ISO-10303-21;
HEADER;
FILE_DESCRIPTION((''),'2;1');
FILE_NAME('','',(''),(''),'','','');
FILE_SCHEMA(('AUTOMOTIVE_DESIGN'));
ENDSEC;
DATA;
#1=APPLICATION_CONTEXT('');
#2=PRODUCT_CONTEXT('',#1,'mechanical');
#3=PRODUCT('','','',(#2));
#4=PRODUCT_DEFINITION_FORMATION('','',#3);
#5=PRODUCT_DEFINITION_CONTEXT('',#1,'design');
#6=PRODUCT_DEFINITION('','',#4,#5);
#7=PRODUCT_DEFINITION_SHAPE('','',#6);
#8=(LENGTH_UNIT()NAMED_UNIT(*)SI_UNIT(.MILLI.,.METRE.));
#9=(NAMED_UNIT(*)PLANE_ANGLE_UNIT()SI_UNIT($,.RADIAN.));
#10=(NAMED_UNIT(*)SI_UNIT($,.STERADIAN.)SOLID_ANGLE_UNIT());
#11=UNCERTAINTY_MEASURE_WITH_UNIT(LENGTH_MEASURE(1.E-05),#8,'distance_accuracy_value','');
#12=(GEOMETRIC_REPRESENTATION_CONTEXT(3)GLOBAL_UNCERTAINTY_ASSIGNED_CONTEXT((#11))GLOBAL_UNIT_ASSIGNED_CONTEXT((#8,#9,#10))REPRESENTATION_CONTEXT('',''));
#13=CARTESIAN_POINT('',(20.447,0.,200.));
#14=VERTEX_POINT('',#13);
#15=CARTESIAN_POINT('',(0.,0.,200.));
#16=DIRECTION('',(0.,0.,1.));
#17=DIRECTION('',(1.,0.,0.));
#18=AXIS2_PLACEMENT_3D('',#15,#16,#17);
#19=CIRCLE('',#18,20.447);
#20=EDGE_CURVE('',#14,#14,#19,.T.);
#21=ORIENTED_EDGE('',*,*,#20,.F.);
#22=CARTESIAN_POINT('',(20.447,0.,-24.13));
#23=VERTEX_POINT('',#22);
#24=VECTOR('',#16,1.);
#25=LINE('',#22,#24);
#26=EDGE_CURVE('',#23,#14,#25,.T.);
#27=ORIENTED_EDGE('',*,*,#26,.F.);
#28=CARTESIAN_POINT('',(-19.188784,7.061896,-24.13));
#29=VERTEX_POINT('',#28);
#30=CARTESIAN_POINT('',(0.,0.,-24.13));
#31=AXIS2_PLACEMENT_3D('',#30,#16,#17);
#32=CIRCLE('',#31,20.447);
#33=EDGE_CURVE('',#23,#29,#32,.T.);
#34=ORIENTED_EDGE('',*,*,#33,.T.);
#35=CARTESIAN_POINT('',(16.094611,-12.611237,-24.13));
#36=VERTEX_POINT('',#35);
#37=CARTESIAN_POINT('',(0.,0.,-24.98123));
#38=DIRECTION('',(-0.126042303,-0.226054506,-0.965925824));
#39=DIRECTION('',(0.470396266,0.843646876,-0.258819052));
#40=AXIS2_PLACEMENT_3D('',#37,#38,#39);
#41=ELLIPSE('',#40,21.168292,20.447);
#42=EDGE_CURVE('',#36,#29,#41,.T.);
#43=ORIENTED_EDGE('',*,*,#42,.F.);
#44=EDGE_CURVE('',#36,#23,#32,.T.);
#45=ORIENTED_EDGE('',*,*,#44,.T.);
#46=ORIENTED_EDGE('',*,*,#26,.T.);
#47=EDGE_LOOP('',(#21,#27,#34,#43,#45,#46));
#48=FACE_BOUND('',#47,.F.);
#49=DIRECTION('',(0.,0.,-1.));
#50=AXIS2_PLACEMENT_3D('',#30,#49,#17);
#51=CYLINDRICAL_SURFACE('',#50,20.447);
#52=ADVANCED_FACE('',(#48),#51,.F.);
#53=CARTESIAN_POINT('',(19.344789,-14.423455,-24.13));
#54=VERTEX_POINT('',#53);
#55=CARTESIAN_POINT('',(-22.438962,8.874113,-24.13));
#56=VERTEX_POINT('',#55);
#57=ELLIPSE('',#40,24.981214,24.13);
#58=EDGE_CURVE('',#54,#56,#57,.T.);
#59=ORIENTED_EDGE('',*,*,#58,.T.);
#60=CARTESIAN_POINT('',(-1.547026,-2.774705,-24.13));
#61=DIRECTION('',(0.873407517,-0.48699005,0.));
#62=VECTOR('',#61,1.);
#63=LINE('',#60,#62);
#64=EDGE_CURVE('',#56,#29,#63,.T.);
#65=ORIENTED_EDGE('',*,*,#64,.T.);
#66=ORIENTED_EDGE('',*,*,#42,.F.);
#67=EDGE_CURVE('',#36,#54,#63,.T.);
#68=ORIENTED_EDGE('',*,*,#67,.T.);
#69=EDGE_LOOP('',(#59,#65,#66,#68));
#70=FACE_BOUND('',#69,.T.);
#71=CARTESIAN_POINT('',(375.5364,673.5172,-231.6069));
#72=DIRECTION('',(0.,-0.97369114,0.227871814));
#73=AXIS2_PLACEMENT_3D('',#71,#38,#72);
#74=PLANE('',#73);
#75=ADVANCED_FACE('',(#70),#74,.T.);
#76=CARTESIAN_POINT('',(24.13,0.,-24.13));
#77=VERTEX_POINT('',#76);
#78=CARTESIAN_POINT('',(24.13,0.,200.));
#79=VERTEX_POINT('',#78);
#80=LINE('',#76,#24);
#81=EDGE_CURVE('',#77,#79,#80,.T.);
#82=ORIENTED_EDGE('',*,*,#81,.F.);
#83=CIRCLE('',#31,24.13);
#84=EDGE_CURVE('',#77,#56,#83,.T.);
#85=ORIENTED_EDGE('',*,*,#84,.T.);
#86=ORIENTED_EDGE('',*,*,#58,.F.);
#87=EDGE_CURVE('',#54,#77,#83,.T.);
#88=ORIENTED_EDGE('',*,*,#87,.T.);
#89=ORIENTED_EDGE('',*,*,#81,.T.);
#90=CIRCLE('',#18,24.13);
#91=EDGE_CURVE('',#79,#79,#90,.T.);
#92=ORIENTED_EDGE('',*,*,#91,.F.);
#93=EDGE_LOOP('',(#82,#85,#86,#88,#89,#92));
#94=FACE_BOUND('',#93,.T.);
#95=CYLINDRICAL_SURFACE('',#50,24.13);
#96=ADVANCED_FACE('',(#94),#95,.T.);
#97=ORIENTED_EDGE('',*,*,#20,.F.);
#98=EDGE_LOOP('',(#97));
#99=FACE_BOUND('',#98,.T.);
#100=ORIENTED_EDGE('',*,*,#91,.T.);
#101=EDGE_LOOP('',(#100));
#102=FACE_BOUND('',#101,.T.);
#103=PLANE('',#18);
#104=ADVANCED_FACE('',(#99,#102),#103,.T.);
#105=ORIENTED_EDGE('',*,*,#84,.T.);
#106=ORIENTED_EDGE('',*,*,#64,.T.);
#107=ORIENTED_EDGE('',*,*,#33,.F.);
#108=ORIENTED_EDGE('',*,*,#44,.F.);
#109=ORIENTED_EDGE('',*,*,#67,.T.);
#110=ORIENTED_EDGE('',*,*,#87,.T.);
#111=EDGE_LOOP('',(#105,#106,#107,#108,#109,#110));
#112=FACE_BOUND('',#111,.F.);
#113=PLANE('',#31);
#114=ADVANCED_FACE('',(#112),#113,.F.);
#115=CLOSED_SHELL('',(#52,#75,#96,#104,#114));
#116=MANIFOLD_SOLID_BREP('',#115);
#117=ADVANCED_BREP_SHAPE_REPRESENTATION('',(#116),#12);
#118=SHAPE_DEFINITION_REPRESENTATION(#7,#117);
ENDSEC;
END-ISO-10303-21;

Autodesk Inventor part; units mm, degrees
ref_plane "Start Plane" through (0, 0, -24.13) normal (0, 0, 1) x (1, 0, 0)
ref_plane "End Plane" through (0, 0, 200) normal (0, 0, 1) x (1, 0, 0)
sketch "Sketch" plane through (0, 0, 0) normal (0, 0, 1) x (1, 0, 0)
  circle A0 centre (0, 0) radius 20.447
  circle A1 centre (0, 0) radius 24.13
  dimension "d0" = 48.26
  dimension "d1" = 3.683
extrude "Body" add sketch "Sketch" along normal up to surface (224.13 mm away) from surface at -24.13
sketch "Sketch3" plane through (0, 0, 0) normal (0, 0, 1) x (1, 0, 0)
  line L0 (0, 0) -> (10, 0)
ref_plane "Work Plane3" through (0, 0, 0) normal (0, -1, 0) x (1, 0, 0)
ref_plane "Work Plane4" through (375.5364, 673.5172, -231.6069) normal (-0.1260423, -0.2260545, -0.9659258) x (0.5337621, -0.8361886, 0.1260423)
split "Split1" plane through (375.5364, 673.5172, -231.6069) removes the side toward (-0.1260423, -0.2260545, -0.9659258)
ref_plane "Work Plane5" through (0, 0, -24.13) normal (0, 0, -1) x (-1, 0, 0)
split "Split2" plane through (0, 0, -24.13) removes the side toward (0, 0, -1)
sketch "Sketch4" plane through (0, 0, 0) normal (0, -1, 0) x (1, 0, 0)
  line L0 (-2, -24.13) -> (12, -24.13) projected
  line L1 (-2, 200) -> (12, 200) projected
  dimension "d7" = 224.13
equation "\"d0\" = G_H"
equation "\"d1\" = G_T"
equation "\"d2\" = G_L"
equation "\"G_H\" = 48.26"
equation "\"G_T\" = 3.683"
equation "\"G_L\" = d7"
equation "\"G_OFFSET_START\" = 24.13"
equation "\"G_OFFSET_END\" = 0"
equation "\"d4\" = -G_OFFSET_START"
equation "\"d5\" = G_OFFSET_END + B_L"
equation "\"B_L\" = 200"
properties part number "ANSI - 1 1/2 x 0.145 - 8.824" material "Steel, Mild"
